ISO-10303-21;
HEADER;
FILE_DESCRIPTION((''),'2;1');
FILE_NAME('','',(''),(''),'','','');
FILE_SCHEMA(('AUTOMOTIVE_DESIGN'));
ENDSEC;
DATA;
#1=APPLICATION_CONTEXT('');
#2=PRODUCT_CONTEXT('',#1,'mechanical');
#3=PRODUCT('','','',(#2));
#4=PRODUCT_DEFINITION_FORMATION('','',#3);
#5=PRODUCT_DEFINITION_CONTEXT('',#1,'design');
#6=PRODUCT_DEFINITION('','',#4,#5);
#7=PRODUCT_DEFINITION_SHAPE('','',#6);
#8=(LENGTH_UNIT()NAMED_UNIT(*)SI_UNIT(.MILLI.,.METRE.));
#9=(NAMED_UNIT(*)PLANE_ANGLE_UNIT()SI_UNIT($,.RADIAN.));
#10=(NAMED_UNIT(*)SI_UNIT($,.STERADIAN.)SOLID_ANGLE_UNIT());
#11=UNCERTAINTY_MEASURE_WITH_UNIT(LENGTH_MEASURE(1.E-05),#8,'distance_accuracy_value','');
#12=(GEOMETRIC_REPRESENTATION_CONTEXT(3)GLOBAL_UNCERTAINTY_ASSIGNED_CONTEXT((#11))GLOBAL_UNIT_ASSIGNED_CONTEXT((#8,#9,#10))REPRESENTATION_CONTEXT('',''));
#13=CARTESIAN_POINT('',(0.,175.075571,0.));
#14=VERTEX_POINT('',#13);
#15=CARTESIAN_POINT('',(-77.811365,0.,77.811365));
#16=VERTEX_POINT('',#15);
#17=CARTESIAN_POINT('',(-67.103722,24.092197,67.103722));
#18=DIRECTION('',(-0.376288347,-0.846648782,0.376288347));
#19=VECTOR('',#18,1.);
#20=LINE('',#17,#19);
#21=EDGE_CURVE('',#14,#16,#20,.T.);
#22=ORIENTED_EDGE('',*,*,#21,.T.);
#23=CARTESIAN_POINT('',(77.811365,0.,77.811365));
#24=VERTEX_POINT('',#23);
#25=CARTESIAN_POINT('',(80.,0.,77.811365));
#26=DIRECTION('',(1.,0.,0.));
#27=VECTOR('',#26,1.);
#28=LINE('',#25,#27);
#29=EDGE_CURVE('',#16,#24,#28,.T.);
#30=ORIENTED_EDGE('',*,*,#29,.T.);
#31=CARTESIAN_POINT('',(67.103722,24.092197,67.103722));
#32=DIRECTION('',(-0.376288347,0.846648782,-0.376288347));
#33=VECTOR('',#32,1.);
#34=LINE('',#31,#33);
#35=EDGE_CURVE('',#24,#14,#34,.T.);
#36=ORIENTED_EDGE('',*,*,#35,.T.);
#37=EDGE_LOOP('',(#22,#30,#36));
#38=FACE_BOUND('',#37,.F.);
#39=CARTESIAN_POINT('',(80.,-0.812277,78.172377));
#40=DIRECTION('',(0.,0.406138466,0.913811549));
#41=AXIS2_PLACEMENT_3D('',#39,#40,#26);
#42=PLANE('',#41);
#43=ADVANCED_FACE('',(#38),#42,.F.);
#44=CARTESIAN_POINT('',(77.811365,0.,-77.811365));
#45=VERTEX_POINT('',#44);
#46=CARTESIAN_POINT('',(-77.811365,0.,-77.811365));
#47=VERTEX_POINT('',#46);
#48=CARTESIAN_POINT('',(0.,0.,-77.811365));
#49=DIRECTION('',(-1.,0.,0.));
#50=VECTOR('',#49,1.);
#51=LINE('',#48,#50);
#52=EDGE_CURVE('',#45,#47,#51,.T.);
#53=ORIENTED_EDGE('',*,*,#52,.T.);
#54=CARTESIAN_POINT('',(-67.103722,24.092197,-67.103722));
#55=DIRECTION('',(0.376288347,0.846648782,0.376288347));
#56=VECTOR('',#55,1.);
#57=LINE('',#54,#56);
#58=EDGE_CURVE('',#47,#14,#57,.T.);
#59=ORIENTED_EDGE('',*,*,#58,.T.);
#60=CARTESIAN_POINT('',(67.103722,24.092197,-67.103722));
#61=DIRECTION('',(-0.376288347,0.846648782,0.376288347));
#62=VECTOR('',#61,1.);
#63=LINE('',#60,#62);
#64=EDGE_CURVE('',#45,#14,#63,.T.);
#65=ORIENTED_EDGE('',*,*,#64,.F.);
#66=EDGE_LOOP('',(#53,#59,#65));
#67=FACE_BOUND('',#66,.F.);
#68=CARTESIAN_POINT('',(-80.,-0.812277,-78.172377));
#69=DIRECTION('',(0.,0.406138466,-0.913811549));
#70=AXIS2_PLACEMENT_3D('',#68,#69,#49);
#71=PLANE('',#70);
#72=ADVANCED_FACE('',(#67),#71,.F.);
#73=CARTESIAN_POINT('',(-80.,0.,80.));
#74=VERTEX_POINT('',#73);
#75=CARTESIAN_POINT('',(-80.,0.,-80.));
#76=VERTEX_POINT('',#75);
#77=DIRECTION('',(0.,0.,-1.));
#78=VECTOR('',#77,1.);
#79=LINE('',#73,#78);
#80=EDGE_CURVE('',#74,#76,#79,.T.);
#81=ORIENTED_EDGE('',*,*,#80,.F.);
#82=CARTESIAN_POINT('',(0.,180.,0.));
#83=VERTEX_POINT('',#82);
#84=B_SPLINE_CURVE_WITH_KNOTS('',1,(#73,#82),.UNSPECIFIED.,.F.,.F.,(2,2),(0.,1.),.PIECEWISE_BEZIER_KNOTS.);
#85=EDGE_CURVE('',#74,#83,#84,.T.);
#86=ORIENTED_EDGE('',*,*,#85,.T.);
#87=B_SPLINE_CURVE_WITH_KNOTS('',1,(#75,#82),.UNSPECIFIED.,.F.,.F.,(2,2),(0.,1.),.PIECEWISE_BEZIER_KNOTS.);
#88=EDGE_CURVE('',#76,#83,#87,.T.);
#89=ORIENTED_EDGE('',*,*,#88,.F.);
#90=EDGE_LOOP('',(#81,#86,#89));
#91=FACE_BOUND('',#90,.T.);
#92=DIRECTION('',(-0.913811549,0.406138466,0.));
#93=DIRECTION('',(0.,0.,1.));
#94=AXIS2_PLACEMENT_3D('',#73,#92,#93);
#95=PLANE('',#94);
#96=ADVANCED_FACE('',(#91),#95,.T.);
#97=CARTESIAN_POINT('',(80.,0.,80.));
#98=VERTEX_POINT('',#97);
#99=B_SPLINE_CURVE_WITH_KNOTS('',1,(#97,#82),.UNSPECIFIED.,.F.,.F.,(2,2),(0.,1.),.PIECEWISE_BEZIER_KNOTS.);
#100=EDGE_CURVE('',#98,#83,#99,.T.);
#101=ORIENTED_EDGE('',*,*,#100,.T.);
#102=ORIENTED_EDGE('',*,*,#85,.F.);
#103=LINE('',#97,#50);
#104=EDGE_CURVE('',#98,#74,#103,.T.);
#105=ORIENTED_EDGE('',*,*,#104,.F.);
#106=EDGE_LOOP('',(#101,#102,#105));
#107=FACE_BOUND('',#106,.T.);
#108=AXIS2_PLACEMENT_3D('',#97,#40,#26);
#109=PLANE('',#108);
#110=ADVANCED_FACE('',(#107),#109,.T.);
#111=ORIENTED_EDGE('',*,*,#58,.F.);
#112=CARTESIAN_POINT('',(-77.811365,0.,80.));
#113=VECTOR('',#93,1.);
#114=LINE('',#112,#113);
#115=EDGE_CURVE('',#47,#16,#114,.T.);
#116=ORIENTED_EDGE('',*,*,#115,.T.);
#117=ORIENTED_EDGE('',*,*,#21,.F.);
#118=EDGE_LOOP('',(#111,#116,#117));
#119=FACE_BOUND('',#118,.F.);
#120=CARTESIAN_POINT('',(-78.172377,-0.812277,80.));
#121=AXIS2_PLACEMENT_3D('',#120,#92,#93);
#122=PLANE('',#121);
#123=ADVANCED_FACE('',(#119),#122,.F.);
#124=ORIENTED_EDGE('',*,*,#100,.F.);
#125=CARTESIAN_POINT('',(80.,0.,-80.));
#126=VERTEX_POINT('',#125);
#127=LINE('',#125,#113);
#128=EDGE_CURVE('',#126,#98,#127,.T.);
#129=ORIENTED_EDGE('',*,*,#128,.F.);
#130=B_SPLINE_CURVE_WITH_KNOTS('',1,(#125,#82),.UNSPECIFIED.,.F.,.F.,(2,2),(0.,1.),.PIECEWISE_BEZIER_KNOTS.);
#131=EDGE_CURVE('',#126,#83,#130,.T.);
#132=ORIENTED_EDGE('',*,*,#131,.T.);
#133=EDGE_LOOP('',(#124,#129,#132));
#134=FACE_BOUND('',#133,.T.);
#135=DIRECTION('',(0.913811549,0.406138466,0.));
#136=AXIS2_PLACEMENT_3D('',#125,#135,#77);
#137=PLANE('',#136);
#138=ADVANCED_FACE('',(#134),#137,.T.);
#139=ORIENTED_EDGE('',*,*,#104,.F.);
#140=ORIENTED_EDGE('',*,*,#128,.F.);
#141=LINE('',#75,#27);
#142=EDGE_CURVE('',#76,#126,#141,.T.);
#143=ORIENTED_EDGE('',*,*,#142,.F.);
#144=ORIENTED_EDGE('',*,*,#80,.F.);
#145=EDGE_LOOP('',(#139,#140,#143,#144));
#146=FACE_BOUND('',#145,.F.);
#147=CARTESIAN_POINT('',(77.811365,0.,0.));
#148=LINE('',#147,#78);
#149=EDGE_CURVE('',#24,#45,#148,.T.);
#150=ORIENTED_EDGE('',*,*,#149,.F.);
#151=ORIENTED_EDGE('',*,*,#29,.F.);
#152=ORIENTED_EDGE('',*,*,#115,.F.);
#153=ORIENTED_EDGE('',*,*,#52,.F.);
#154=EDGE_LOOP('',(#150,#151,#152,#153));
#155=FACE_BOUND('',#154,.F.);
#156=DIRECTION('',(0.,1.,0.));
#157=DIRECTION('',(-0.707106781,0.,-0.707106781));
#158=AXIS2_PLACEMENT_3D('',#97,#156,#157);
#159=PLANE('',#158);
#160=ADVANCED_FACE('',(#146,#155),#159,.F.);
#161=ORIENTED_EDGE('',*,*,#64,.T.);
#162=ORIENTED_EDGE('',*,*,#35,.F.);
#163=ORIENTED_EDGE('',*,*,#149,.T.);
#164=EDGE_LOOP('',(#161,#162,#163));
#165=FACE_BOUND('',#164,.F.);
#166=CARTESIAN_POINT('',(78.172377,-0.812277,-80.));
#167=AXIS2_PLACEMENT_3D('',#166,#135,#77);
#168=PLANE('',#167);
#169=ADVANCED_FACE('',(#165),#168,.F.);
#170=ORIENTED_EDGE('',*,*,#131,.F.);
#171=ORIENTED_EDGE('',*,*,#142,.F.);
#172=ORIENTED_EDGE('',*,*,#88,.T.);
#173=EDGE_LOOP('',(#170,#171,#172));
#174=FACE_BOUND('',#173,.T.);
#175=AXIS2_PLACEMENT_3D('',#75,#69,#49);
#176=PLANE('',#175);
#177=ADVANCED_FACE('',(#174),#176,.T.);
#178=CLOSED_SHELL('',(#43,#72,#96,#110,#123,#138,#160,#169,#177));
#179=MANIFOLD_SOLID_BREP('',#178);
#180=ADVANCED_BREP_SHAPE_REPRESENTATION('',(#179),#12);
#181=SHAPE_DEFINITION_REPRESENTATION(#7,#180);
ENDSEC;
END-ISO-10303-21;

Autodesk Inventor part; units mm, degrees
ref_plane "YZ Plane" through (0, 0, 0) normal (1, 0, 0) x (0, 1, 0)
ref_plane "XY Plane" through (0, 0, 0) normal (0, 0, 1) x (1, 0, 0)
sketch "Sketch1" plane through (0, 0, 0) normal (0, 1, 0) x (-1, 0, 0)
  line L0 (-80, 80) -> (80, 80)
  line L1 (80, 80) -> (80, -80)
  line L2 (80, -80) -> (-80, -80)
  line L3 (-80, -80) -> (-80, 80)
  line L4 (-80, 80) -> (80, -80) construction
  line L5 (80, 80) -> (-80, -80) construction
  point P0 (0, 0)
  dimension "d0" = 160
  dimension "d1" = 160
ref_plane "Work Plane3" through (0, 180, 0) normal (0, 1, 0) x (-1, 0, 0)
sketch "Sketch7" plane through (0, 180, 0) normal (0, 1, 0) x (-1, 0, 0)
  point P0 (0, 0)
  point P1 (0, 0)
loft "Loft2" add profiles "Sketch1" section 2 point at (0, 180, 0)
shell "Shell2" thickness 2 removed faces 1 at (26.6667, 0, 26.6667)
properties part number "pyramid"
